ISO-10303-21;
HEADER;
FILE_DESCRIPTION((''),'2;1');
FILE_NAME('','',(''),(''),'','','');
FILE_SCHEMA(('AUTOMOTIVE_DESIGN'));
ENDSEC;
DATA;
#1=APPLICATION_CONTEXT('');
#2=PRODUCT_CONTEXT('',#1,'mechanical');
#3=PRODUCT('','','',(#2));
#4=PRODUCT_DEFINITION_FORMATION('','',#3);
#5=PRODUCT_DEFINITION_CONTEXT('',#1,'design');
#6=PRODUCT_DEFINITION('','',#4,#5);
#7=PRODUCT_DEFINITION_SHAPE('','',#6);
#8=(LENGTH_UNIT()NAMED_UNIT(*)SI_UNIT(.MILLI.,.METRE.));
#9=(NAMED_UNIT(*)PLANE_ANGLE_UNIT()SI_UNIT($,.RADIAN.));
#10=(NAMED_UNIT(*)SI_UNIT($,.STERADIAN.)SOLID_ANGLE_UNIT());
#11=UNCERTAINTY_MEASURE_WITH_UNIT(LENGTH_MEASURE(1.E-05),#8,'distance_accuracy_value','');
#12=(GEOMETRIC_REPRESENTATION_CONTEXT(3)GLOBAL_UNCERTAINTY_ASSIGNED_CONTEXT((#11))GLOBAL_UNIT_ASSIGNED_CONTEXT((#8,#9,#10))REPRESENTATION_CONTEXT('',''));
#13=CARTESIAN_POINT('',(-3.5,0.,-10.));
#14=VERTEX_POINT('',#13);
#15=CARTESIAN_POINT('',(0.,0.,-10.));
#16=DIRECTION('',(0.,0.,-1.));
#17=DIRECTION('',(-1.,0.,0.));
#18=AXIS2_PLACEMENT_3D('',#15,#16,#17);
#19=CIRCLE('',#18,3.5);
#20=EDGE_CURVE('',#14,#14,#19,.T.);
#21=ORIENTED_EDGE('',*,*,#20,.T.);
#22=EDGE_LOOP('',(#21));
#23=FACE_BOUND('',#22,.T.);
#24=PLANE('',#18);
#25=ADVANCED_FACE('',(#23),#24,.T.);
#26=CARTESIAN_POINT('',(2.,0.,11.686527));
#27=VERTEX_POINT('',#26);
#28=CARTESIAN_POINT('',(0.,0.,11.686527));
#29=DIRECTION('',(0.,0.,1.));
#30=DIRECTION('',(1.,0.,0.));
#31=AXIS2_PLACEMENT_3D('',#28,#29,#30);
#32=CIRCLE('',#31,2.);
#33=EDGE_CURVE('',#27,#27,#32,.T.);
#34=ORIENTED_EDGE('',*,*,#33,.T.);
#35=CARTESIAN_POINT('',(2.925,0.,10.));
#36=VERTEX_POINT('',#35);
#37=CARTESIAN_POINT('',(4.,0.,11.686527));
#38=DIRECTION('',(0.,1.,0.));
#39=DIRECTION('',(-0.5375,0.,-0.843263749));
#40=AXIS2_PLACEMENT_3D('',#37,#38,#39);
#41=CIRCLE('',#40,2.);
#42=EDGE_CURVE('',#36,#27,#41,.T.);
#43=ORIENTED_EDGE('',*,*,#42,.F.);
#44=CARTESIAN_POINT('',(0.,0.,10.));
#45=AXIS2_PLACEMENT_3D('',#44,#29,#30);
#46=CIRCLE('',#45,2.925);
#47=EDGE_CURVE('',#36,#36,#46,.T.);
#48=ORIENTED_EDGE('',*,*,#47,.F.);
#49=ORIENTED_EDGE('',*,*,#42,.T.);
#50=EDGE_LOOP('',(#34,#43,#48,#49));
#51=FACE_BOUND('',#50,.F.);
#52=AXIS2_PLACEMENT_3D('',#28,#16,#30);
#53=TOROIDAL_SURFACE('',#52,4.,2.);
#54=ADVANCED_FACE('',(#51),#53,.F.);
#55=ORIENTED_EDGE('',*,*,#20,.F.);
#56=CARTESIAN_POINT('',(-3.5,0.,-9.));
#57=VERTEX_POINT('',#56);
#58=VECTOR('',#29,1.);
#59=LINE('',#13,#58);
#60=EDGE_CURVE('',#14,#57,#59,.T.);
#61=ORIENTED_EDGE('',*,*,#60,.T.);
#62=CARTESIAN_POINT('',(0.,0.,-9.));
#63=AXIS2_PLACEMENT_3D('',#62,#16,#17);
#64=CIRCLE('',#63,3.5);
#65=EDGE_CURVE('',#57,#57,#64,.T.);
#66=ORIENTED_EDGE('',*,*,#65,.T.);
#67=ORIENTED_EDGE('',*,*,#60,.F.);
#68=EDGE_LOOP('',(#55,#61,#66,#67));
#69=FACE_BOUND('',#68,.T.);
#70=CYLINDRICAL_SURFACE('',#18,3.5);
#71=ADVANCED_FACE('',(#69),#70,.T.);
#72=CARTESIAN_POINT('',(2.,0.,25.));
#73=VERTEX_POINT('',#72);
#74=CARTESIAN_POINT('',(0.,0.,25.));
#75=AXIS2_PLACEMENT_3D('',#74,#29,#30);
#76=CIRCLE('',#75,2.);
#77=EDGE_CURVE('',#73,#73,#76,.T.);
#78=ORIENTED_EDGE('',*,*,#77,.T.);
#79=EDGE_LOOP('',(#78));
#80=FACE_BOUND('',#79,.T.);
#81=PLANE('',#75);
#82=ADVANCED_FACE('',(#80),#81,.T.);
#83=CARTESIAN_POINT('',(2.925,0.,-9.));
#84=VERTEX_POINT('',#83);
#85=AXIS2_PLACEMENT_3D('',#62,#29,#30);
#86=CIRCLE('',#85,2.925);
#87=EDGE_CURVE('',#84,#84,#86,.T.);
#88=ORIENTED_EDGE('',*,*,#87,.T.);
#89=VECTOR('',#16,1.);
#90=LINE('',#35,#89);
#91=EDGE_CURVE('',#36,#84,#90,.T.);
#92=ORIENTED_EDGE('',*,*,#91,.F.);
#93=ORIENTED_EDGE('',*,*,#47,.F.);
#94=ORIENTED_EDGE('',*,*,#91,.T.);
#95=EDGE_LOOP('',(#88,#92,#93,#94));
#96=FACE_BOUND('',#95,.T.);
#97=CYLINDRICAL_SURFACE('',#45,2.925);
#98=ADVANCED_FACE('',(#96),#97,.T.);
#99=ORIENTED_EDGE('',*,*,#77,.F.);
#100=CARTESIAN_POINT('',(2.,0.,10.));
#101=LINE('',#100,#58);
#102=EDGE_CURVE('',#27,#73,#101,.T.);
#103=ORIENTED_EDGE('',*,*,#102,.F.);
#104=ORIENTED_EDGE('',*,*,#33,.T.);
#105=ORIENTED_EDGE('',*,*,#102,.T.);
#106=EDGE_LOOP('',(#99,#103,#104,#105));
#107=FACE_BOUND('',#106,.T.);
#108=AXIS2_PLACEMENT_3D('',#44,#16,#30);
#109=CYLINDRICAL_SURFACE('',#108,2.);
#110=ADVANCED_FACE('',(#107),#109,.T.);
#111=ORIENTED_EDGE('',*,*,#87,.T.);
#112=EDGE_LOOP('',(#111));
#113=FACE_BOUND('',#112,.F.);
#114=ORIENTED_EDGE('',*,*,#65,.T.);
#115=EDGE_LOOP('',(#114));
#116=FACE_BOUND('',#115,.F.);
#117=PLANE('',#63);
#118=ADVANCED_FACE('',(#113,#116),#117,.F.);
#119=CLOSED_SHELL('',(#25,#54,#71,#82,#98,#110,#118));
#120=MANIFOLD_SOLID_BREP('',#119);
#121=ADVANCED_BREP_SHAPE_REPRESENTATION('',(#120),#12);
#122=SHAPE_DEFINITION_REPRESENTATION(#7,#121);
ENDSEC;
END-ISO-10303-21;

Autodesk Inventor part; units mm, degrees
ref_plane "YZ Plane" through (0, 0, 0) normal (1, 0, 0) x (0, 1, 0)
ref_plane "XZ Plane" through (0, 0, 0) normal (0, 1, 0) x (-1, 0, 0)
ref_plane "XY Plane" through (0, 0, 0) normal (0, 0, 1) x (1, 0, 0)
sketch "Sketch1" plane through (0, 0, 0) normal (0, 0, 1) x (1, 0, 0)
  point P0 (0, 0)
sketch "Sketch2" plane through (0, 0, 0) normal (0, 0, 1) x (1, 0, 0)
  circle A0 centre (0, 0) radius 3
  dimension "d0" = 6
extrude "Extrusion1" add sketch "Sketch2" along normal blind 10
sketch "Sketch3" plane through (0, 0, 10) normal (0, 0, 1) x (1, 0, 0)
  circle A0 centre (0, 0) radius 2
  dimension "d3" = 4
extrude "Extrusion2" add sketch "Sketch3" along normal blind 15
sketch "Sketch4" plane through (0, 0, 0) normal (0, 0, -1) x (-1, 0, 0)
  circle A0 centre (0, 0) radius 3 projected
extrude "Extrusion3" add sketch "Sketch4" along normal blind 10
sketch "Sketch5" plane through (0, 0, -10) normal (0, 0, -1) x (-1, 0, 0)
  circle A0 centre (0, 0) radius 2 projected
  circle A1 centre (0, 0) radius 3.5
  dimension "d8" = 7
extrude "Extrusion4" add sketch "Sketch5" against normal blind 1
sketch "Sketch6" plane through (0, 0, -9) normal (0, 0, 1) x (1, 0, 0)
  point P0 (0, 0)
sketch "Sketch7" plane through (0, 0, 10) normal (0, 0, 1) x (1, 0, 0)
  circle A0 centre (0, 0) radius 3
  circle A1 centre (0, 0) radius 2.925
  dimension "d11" = 5.85
extrude "Extrusion5" cut sketch "Sketch7" against normal up to surface (19 mm away)
fillet "Fillet1" radius 2 1 edges at (-2, 0, 10)
properties part number "Eje"
